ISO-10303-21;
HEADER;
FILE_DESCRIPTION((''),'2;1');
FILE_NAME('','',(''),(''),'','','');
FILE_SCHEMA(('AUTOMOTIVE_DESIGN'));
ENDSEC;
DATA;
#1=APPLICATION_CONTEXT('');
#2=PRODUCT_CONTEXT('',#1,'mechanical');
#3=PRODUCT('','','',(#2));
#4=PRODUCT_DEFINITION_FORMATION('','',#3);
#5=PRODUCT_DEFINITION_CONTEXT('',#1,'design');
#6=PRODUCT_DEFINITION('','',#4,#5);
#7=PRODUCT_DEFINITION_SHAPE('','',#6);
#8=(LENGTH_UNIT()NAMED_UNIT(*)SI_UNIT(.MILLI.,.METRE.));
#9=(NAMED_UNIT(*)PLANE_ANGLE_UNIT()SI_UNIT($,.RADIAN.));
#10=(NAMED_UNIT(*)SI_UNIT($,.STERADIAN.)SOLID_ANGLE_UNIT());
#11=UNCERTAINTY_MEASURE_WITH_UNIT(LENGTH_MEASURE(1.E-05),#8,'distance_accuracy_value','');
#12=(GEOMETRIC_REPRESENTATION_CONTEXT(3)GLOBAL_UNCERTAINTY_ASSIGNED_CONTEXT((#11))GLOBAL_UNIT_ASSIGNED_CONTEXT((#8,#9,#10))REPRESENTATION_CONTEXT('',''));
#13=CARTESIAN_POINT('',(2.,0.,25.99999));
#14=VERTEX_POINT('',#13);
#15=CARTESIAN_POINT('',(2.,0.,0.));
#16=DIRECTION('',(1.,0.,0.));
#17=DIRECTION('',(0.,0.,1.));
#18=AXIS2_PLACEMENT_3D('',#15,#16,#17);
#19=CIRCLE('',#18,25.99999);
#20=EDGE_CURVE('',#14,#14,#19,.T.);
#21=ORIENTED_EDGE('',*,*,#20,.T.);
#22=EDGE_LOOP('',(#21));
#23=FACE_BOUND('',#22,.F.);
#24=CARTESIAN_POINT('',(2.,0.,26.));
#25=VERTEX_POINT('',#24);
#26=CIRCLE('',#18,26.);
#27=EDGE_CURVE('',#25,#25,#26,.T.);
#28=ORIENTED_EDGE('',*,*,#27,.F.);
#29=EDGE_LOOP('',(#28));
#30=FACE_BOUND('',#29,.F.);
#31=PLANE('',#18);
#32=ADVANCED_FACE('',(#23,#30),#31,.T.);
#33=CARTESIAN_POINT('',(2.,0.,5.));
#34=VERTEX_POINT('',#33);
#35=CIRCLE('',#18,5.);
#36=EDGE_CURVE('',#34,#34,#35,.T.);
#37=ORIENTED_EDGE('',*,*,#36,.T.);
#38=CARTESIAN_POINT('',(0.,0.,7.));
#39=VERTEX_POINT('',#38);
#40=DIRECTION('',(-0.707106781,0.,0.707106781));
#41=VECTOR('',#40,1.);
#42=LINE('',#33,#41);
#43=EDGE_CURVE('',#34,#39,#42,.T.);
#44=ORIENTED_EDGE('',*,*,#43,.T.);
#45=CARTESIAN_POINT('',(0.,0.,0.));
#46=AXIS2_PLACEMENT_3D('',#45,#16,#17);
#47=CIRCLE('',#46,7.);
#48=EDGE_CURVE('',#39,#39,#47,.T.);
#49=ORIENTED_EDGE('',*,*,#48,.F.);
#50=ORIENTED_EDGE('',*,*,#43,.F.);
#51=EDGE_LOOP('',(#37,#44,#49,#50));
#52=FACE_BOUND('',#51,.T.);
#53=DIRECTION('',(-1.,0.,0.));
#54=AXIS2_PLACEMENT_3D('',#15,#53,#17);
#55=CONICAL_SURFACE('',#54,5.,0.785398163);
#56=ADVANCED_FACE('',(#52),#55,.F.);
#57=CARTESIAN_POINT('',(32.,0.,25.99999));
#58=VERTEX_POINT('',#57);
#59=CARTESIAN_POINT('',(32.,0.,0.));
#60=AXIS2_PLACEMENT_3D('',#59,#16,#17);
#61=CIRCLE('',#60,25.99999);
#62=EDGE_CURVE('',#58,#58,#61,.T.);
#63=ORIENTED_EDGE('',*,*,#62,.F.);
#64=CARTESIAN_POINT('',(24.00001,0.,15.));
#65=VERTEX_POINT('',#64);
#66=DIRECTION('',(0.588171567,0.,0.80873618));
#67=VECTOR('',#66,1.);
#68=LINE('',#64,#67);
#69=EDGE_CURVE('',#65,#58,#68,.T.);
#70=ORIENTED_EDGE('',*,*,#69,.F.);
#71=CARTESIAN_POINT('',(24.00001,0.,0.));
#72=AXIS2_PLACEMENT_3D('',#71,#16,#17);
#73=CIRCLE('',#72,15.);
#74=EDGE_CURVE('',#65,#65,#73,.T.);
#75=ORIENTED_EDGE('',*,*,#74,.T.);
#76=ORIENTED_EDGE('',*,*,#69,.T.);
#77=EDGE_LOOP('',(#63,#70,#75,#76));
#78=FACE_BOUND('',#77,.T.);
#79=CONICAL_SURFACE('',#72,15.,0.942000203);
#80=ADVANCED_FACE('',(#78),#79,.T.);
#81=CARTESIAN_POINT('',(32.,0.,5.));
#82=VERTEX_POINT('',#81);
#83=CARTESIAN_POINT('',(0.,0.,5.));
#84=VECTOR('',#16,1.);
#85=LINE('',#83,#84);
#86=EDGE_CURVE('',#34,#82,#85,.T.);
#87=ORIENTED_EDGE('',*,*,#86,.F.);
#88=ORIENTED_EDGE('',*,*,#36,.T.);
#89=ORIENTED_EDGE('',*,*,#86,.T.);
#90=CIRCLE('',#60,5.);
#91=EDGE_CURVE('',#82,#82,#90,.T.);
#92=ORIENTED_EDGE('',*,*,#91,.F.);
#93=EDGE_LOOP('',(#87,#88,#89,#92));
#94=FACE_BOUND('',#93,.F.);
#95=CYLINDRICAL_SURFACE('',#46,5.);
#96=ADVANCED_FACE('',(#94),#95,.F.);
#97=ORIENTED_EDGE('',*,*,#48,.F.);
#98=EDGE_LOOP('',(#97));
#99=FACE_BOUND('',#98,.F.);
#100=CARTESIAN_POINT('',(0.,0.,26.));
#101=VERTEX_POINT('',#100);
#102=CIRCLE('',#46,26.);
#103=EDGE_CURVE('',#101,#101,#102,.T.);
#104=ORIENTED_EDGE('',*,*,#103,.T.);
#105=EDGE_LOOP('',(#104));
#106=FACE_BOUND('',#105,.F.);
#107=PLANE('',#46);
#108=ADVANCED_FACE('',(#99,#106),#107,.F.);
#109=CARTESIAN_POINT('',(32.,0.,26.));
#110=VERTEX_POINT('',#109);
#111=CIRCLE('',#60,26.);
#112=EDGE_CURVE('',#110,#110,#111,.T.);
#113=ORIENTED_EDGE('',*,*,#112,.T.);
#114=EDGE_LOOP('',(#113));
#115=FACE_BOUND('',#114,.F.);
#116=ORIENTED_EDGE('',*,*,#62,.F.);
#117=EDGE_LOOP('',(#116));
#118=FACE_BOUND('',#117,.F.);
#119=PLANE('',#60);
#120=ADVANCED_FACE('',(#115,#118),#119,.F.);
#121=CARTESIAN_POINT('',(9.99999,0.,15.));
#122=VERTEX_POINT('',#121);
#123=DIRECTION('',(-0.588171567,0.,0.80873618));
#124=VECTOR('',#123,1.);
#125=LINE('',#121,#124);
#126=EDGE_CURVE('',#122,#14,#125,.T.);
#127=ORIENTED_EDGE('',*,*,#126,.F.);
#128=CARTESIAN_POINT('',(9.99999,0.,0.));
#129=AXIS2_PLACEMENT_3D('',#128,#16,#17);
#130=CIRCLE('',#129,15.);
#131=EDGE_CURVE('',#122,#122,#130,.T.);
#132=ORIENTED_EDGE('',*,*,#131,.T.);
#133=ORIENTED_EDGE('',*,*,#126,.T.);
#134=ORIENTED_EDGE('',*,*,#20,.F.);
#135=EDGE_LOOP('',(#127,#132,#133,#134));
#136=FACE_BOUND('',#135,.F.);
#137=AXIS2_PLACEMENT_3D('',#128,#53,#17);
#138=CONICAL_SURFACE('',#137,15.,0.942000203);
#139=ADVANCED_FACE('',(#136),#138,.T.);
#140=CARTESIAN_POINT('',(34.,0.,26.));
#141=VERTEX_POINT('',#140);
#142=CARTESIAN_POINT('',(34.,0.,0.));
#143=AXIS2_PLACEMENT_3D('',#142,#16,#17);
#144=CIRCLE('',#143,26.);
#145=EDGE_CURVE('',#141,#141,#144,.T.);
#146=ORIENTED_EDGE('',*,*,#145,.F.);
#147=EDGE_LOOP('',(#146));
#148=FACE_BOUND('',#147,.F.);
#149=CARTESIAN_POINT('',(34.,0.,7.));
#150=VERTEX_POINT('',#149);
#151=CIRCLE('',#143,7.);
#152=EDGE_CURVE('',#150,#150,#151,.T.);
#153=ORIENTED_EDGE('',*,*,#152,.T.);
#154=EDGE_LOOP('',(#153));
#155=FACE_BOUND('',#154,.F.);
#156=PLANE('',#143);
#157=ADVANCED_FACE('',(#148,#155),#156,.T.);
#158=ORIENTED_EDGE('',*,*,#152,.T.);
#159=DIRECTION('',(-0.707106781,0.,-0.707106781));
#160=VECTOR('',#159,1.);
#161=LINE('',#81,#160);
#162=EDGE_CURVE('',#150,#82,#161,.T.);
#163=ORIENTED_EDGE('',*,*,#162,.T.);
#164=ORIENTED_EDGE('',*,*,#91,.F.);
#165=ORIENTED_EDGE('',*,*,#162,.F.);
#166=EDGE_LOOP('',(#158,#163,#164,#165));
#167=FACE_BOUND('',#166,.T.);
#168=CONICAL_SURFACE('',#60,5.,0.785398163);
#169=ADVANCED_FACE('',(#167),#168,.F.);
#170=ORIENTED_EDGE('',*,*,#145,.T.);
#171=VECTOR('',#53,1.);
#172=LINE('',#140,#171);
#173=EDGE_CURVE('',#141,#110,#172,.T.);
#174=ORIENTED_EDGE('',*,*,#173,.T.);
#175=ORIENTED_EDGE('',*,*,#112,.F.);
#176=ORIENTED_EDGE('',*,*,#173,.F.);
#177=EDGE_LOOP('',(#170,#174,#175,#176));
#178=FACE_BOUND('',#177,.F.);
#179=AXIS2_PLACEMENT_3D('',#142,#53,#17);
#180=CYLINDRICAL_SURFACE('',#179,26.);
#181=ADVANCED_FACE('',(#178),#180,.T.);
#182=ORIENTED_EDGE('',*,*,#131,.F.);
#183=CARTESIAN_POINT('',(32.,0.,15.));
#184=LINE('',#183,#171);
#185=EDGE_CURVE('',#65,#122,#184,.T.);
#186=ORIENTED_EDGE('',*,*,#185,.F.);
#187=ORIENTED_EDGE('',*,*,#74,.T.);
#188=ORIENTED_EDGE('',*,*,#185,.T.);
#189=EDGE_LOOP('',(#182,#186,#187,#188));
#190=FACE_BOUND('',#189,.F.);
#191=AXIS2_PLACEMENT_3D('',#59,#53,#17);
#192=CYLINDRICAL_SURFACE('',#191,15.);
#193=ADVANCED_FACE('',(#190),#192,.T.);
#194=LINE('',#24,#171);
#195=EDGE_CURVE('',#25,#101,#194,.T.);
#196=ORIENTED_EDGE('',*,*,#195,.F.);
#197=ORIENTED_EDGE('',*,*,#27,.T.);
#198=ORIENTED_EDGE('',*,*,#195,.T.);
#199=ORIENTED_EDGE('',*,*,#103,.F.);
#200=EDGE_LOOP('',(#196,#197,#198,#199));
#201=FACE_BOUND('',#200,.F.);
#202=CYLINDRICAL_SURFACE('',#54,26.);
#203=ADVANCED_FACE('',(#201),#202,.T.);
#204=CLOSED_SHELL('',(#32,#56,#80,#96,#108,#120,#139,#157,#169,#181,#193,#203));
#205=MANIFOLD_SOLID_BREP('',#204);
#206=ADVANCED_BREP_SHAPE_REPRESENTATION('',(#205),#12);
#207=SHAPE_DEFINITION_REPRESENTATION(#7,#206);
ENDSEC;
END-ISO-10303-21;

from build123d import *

# Parameters (mm, degrees)
F2_SIZE2 = 10.99999
F2_SIZE  = 7.99999
F3_SIZE  = 2


# Not quite as in the source:
# - a fillet or chamfer is up to 0.001 mm smaller than in the source, because OpenCascade refuses the exact size


with BuildPart() as f1:
    # F0 (on Front) → F1 (revolve)
    with BuildSketch(Plane.XZ):
        Polygon((0, 26), (0, 5), (34, 5), (34, 26), (32, 26), (32, 15), (2, 15), (2, 26), align=None)
    revolve(axis=Axis((17, 0, 0), (1, 0, 0)))

    # F2 (size 8 and 11 in the source; OpenCascade refuses exactly that, so slightly less here)
    f2_edges = [f1.edges().sort_by_distance(p)[0] for p in [
        (2, 0, -15),
        (32, 0, -15),
    ]]
    f2_side = f1.faces().sort_by_distance((17, 0, -15))[0]
    chamfer(f2_edges, length=F2_SIZE, length2=F2_SIZE2, reference=f2_side)

    # F3
    f3_edges = [f1.edges().sort_by_distance(p)[0] for p in [
        (0, 0, -5),
        (34, 0, -5),
    ]]
    chamfer(f3_edges, length=F3_SIZE)


solid = f1.part
